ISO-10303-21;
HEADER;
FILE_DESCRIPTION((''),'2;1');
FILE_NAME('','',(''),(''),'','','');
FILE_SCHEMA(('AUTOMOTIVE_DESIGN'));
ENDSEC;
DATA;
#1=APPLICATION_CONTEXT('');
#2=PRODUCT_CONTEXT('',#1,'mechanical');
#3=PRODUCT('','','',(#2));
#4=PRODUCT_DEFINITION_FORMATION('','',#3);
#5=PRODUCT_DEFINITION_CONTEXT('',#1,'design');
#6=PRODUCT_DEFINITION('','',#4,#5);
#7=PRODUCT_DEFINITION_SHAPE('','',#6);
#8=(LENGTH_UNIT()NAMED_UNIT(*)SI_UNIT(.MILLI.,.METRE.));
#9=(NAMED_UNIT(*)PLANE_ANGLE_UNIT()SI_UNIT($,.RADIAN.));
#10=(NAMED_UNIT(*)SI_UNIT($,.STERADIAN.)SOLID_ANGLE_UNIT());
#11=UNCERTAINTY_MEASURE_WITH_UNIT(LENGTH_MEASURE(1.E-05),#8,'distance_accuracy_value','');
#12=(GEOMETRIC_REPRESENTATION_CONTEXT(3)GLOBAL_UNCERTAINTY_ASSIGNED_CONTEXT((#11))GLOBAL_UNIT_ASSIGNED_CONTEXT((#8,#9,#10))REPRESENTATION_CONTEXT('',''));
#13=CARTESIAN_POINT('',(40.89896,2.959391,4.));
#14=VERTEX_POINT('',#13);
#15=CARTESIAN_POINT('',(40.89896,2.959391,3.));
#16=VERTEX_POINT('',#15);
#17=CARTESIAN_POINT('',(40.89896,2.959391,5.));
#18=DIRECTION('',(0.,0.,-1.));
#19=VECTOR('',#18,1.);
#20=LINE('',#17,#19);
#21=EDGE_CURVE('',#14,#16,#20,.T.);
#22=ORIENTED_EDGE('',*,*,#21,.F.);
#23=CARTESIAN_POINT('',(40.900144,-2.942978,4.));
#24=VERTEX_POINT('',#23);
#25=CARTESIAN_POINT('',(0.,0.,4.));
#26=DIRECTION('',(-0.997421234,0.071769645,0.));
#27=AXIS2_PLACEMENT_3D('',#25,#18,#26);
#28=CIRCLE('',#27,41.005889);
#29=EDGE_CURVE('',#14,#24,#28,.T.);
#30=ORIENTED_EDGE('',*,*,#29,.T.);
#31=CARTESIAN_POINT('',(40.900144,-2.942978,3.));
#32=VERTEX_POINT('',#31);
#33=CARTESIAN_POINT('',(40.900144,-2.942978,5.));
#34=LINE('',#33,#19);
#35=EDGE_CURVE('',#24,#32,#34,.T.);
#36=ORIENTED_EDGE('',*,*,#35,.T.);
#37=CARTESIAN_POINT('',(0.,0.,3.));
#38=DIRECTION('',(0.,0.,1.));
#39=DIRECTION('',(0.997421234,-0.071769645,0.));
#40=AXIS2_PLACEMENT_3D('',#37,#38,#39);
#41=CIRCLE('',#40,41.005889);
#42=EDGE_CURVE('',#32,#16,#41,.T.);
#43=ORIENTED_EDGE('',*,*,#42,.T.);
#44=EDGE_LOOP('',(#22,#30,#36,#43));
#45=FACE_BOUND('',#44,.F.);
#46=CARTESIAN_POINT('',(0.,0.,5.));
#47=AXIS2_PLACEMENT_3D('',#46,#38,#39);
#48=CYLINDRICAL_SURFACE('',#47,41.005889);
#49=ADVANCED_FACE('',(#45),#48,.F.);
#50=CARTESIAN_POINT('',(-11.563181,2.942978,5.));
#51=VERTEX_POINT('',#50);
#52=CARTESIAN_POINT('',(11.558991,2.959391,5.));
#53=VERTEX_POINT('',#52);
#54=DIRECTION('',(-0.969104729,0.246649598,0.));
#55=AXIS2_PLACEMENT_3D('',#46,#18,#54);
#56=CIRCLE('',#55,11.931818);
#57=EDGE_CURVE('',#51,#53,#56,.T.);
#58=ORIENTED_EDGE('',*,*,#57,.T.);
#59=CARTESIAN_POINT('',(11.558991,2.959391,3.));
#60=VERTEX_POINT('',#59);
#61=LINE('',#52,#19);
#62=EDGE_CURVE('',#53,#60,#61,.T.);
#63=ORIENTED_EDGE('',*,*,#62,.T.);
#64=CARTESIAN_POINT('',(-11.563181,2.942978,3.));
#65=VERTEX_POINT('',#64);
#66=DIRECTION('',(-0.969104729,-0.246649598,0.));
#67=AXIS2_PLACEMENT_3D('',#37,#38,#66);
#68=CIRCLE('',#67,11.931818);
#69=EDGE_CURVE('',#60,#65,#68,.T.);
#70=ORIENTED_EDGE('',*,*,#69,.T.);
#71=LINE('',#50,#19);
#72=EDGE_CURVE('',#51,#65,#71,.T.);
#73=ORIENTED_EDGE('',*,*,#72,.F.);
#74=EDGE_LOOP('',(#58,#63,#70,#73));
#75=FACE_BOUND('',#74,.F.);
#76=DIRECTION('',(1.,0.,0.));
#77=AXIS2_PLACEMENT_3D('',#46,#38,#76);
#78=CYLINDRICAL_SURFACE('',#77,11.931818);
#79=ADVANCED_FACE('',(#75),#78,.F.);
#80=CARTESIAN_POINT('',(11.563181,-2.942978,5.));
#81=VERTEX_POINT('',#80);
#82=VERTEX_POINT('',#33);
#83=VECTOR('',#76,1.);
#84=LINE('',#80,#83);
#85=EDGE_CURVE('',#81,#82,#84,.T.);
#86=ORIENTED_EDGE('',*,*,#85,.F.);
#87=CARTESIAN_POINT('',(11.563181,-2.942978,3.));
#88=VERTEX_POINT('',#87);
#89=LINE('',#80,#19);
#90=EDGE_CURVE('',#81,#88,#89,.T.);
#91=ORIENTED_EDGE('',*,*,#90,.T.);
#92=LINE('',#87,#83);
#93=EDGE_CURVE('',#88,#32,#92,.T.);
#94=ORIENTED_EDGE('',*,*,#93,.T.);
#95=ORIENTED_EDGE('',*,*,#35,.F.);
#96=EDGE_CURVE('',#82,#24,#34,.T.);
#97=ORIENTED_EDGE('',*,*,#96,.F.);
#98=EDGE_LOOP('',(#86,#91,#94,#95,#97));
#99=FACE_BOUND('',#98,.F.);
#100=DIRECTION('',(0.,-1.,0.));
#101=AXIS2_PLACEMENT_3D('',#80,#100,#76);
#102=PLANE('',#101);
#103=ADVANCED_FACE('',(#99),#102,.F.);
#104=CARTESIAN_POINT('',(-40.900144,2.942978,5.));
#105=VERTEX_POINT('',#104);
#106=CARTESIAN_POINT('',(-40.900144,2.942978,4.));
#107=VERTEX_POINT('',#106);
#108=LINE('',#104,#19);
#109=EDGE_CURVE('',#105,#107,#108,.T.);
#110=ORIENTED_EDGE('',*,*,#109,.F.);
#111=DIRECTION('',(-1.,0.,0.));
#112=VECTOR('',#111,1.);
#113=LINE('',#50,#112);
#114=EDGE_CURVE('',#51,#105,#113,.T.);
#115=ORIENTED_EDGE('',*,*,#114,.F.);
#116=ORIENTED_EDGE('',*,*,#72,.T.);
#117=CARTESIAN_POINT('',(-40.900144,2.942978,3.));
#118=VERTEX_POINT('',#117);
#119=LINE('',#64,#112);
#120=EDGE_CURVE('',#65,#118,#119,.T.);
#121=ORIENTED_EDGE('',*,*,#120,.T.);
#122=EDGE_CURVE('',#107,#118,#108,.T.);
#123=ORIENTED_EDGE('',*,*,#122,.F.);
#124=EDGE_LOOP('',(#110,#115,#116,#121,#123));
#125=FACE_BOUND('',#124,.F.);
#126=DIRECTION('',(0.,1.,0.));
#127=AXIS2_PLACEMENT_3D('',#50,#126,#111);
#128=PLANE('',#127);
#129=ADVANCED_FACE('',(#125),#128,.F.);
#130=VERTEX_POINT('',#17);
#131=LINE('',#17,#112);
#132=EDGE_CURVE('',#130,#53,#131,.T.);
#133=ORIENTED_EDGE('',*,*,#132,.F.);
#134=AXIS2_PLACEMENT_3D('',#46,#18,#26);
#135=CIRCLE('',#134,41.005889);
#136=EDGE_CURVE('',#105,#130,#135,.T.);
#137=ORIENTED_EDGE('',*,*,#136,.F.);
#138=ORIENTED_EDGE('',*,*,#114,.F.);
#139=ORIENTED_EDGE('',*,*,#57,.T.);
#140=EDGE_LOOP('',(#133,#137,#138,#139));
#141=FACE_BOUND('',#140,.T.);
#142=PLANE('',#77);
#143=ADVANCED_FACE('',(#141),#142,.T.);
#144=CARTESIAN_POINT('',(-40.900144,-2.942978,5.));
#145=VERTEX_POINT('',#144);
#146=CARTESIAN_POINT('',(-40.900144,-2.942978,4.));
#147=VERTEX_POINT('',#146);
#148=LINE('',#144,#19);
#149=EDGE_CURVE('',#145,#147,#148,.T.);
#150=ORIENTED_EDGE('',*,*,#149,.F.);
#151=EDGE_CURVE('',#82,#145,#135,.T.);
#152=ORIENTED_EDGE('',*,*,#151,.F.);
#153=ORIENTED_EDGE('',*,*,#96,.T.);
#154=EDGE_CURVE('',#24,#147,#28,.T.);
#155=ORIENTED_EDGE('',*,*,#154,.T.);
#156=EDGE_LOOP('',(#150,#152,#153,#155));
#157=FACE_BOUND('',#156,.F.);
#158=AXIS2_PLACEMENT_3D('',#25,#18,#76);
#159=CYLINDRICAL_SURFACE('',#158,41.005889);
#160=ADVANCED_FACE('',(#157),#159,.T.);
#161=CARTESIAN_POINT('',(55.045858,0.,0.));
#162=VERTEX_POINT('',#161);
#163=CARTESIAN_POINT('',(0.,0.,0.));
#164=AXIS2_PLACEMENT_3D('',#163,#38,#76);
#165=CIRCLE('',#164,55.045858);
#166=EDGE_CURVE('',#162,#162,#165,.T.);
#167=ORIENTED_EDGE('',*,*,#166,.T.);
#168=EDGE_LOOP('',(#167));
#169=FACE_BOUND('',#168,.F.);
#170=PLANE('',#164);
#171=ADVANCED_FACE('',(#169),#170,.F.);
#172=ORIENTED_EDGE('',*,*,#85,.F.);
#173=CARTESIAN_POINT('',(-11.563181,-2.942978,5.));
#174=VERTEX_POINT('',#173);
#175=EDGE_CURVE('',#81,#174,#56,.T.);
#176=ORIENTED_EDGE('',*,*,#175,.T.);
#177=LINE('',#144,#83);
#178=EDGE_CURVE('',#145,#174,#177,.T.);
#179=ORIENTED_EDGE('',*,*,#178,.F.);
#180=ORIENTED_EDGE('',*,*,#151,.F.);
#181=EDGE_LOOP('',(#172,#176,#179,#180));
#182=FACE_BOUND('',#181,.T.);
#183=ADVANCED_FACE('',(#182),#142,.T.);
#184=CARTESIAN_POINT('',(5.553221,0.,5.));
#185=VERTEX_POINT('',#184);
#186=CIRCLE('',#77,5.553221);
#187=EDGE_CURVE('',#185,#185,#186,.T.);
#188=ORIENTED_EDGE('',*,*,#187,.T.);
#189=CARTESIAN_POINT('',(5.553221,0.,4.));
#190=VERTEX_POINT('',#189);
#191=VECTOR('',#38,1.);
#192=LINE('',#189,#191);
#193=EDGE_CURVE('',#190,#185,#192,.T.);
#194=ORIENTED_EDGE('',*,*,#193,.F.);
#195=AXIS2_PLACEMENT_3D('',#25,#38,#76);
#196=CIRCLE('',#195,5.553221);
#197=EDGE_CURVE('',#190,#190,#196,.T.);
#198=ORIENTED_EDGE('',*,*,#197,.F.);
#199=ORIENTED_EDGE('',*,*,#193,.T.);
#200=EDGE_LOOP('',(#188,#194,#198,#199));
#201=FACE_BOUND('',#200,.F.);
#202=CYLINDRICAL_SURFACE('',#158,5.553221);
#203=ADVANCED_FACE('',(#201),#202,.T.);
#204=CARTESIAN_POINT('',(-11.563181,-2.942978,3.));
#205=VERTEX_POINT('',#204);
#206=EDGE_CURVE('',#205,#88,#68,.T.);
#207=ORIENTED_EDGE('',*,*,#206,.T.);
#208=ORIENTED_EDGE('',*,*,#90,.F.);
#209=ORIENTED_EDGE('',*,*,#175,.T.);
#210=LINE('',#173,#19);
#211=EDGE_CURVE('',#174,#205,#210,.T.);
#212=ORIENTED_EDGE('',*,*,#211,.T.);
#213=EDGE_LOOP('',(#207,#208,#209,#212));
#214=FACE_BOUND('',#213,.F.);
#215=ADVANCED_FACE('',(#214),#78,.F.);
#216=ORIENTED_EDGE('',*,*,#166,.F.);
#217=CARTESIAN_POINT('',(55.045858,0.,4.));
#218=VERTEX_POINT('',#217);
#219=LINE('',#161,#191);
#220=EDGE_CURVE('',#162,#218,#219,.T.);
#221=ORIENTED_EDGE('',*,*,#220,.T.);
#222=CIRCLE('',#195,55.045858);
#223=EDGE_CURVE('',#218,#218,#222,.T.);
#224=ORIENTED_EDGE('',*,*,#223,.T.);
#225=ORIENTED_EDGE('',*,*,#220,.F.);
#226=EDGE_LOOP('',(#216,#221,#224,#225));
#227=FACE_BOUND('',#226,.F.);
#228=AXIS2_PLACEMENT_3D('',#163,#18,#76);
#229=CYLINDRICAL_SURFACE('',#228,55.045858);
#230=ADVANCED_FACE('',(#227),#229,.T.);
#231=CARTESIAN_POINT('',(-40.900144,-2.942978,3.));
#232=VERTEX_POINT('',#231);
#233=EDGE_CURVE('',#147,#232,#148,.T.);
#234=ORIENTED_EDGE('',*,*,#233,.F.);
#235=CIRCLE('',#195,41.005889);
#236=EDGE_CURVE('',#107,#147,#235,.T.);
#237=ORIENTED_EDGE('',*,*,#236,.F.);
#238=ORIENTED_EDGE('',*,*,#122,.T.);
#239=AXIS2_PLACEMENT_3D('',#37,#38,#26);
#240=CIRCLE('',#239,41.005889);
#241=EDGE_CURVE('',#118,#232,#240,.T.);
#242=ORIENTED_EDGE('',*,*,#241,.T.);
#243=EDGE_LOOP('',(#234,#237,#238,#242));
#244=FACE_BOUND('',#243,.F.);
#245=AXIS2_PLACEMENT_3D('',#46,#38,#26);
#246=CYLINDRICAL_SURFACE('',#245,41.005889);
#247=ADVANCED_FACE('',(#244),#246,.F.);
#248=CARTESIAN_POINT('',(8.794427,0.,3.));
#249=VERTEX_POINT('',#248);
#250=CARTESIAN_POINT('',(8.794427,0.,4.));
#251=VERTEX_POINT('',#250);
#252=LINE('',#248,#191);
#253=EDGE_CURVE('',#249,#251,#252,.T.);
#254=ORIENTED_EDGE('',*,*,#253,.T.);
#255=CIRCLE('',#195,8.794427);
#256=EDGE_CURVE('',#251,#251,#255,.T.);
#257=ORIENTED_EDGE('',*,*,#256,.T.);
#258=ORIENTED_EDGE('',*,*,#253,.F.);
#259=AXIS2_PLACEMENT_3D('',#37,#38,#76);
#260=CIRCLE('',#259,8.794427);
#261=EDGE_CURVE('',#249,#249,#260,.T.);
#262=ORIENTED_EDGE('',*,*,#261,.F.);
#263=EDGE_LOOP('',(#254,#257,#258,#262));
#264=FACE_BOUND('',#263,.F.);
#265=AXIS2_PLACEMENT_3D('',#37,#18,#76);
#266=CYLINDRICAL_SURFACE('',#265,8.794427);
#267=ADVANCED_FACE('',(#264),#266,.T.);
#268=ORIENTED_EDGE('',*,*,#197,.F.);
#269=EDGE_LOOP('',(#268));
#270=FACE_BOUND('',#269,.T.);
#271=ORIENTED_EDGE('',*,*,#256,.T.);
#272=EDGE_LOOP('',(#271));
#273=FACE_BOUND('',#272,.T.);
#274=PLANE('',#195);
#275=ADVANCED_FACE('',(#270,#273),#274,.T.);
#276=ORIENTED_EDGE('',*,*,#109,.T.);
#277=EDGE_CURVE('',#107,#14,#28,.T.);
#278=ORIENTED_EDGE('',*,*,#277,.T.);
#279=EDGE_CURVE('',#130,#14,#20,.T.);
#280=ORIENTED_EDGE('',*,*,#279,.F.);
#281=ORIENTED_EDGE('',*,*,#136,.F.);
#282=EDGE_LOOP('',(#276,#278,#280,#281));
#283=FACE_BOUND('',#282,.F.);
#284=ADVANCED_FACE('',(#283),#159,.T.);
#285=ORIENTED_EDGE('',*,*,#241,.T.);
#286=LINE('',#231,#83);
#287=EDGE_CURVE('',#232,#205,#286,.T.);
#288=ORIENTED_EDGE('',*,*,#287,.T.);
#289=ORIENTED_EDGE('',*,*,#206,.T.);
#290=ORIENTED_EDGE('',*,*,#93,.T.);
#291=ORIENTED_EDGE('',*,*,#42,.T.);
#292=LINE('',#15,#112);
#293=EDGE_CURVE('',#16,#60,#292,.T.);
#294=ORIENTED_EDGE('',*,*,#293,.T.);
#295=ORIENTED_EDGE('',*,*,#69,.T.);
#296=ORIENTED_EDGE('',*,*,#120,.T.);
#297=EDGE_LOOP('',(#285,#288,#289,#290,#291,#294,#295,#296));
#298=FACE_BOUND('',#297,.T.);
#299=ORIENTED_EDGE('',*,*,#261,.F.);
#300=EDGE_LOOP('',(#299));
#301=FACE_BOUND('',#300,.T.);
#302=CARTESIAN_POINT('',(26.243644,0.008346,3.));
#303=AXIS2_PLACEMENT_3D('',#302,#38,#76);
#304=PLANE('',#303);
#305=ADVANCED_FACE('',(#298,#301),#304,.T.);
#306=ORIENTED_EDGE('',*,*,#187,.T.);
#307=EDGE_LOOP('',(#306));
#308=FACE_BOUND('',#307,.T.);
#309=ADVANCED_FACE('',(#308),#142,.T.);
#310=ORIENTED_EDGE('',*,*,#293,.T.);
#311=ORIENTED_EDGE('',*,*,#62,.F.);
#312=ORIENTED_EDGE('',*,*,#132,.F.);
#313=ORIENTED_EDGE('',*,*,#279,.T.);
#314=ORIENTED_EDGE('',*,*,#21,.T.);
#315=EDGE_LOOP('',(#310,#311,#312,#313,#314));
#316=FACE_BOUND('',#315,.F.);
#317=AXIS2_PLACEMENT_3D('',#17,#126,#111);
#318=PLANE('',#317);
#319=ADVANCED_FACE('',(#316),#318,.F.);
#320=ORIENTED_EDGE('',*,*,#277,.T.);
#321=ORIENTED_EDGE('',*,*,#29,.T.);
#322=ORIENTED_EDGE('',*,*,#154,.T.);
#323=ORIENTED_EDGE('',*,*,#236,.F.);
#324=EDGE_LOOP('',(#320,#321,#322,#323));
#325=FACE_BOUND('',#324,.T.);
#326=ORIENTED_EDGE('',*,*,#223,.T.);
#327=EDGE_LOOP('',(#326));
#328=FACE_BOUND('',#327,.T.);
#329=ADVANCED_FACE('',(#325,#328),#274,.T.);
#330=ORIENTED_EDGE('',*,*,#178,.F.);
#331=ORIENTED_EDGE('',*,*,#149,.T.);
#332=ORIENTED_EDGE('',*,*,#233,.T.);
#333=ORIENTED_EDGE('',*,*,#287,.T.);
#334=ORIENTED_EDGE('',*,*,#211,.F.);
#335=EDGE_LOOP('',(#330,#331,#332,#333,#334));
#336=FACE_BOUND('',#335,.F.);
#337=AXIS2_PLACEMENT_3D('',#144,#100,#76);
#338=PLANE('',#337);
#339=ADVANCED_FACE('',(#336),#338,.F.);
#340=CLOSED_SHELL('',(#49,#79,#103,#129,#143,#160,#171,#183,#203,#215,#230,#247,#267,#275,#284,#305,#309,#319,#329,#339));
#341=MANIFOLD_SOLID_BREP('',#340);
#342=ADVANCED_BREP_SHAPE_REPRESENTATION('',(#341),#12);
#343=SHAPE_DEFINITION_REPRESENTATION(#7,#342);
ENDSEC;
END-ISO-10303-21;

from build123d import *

# Parameters (mm, degrees)
F0_R      = 55.0458583504
F1_DEPTH  = 4
F2_R      = 41.0058886934
F3_DEPTH  = 1
F4_R      = 11.9318178019
F5_DEPTH  = 2
F6_R      = 8.7944266384
F7_DEPTH  = 1
F8_R      = 5.553220806
F9_DEPTH  = 1
F11_DEPTH = 2
F13_DEPTH = 2


with BuildPart() as f1:
    # F0 (on Top) → F1 (new body)
    with BuildSketch(Plane.XY):
        Circle(F0_R)
    extrude(amount=F1_DEPTH)

    # F2 (on face) → F3 (join)
    with BuildSketch(Plane.XY.offset(4)):
        Circle(F2_R)
    extrude(amount=F3_DEPTH)

    # F4 (on face) → F5 (cut)
    with BuildSketch(Plane.XY.offset(5)):
        Circle(F4_R)
    extrude(amount=-F5_DEPTH, mode=Mode.SUBTRACT)

    # F6 (on face) → F7 (join)
    with BuildSketch(Plane.XY.offset(3)):
        Circle(F6_R)
    extrude(amount=F7_DEPTH)

    # F8 (on face) → F9 (join)
    with BuildSketch(Plane.XY.offset(4)):
        Circle(F8_R)
    extrude(amount=F9_DEPTH)

    # F10 (on face) → F11 (cut)
    with BuildSketch(Plane.XY.offset(5)):
        with BuildLine():
            Line((-11.5631810567, 2.9429780682), (-40.9001441028, 2.9429780682))
            ThreePointArc((-40.9001441028, 2.9429780682), (-41.0058886934, 0), (-40.9001441028, -2.9429780682))
            Line((-40.9001441028, -2.9429780682), (-11.5631810567, -2.9429780682))
            ThreePointArc((-11.5631810567, -2.9429780682), (-11.9318178019, 0), (-11.5631810567, 2.9429780682))
        make_face()
    extrude(amount=-F11_DEPTH, mode=Mode.SUBTRACT)

    # F12 (on face) → F13 (cut)
    with BuildSketch(Plane.XY.offset(5)):
        with BuildLine():
            Line((40.8989598294, 2.959390547), (11.5589914633, 2.959390547))
            ThreePointArc((11.5589914633, 2.959390547), (11.9318147961, 0.0084693883), (11.5631810567, -2.9429780682))
            Line((11.5631810567, -2.9429780682), (40.9001441028, -2.9429780682))
            ThreePointArc((40.9001441028, -2.9429780682), (41.005887868, 0.008227575), (40.8989598294, 2.959390547))
        make_face()
    extrude(amount=-F13_DEPTH, mode=Mode.SUBTRACT)


solid = f1.part
